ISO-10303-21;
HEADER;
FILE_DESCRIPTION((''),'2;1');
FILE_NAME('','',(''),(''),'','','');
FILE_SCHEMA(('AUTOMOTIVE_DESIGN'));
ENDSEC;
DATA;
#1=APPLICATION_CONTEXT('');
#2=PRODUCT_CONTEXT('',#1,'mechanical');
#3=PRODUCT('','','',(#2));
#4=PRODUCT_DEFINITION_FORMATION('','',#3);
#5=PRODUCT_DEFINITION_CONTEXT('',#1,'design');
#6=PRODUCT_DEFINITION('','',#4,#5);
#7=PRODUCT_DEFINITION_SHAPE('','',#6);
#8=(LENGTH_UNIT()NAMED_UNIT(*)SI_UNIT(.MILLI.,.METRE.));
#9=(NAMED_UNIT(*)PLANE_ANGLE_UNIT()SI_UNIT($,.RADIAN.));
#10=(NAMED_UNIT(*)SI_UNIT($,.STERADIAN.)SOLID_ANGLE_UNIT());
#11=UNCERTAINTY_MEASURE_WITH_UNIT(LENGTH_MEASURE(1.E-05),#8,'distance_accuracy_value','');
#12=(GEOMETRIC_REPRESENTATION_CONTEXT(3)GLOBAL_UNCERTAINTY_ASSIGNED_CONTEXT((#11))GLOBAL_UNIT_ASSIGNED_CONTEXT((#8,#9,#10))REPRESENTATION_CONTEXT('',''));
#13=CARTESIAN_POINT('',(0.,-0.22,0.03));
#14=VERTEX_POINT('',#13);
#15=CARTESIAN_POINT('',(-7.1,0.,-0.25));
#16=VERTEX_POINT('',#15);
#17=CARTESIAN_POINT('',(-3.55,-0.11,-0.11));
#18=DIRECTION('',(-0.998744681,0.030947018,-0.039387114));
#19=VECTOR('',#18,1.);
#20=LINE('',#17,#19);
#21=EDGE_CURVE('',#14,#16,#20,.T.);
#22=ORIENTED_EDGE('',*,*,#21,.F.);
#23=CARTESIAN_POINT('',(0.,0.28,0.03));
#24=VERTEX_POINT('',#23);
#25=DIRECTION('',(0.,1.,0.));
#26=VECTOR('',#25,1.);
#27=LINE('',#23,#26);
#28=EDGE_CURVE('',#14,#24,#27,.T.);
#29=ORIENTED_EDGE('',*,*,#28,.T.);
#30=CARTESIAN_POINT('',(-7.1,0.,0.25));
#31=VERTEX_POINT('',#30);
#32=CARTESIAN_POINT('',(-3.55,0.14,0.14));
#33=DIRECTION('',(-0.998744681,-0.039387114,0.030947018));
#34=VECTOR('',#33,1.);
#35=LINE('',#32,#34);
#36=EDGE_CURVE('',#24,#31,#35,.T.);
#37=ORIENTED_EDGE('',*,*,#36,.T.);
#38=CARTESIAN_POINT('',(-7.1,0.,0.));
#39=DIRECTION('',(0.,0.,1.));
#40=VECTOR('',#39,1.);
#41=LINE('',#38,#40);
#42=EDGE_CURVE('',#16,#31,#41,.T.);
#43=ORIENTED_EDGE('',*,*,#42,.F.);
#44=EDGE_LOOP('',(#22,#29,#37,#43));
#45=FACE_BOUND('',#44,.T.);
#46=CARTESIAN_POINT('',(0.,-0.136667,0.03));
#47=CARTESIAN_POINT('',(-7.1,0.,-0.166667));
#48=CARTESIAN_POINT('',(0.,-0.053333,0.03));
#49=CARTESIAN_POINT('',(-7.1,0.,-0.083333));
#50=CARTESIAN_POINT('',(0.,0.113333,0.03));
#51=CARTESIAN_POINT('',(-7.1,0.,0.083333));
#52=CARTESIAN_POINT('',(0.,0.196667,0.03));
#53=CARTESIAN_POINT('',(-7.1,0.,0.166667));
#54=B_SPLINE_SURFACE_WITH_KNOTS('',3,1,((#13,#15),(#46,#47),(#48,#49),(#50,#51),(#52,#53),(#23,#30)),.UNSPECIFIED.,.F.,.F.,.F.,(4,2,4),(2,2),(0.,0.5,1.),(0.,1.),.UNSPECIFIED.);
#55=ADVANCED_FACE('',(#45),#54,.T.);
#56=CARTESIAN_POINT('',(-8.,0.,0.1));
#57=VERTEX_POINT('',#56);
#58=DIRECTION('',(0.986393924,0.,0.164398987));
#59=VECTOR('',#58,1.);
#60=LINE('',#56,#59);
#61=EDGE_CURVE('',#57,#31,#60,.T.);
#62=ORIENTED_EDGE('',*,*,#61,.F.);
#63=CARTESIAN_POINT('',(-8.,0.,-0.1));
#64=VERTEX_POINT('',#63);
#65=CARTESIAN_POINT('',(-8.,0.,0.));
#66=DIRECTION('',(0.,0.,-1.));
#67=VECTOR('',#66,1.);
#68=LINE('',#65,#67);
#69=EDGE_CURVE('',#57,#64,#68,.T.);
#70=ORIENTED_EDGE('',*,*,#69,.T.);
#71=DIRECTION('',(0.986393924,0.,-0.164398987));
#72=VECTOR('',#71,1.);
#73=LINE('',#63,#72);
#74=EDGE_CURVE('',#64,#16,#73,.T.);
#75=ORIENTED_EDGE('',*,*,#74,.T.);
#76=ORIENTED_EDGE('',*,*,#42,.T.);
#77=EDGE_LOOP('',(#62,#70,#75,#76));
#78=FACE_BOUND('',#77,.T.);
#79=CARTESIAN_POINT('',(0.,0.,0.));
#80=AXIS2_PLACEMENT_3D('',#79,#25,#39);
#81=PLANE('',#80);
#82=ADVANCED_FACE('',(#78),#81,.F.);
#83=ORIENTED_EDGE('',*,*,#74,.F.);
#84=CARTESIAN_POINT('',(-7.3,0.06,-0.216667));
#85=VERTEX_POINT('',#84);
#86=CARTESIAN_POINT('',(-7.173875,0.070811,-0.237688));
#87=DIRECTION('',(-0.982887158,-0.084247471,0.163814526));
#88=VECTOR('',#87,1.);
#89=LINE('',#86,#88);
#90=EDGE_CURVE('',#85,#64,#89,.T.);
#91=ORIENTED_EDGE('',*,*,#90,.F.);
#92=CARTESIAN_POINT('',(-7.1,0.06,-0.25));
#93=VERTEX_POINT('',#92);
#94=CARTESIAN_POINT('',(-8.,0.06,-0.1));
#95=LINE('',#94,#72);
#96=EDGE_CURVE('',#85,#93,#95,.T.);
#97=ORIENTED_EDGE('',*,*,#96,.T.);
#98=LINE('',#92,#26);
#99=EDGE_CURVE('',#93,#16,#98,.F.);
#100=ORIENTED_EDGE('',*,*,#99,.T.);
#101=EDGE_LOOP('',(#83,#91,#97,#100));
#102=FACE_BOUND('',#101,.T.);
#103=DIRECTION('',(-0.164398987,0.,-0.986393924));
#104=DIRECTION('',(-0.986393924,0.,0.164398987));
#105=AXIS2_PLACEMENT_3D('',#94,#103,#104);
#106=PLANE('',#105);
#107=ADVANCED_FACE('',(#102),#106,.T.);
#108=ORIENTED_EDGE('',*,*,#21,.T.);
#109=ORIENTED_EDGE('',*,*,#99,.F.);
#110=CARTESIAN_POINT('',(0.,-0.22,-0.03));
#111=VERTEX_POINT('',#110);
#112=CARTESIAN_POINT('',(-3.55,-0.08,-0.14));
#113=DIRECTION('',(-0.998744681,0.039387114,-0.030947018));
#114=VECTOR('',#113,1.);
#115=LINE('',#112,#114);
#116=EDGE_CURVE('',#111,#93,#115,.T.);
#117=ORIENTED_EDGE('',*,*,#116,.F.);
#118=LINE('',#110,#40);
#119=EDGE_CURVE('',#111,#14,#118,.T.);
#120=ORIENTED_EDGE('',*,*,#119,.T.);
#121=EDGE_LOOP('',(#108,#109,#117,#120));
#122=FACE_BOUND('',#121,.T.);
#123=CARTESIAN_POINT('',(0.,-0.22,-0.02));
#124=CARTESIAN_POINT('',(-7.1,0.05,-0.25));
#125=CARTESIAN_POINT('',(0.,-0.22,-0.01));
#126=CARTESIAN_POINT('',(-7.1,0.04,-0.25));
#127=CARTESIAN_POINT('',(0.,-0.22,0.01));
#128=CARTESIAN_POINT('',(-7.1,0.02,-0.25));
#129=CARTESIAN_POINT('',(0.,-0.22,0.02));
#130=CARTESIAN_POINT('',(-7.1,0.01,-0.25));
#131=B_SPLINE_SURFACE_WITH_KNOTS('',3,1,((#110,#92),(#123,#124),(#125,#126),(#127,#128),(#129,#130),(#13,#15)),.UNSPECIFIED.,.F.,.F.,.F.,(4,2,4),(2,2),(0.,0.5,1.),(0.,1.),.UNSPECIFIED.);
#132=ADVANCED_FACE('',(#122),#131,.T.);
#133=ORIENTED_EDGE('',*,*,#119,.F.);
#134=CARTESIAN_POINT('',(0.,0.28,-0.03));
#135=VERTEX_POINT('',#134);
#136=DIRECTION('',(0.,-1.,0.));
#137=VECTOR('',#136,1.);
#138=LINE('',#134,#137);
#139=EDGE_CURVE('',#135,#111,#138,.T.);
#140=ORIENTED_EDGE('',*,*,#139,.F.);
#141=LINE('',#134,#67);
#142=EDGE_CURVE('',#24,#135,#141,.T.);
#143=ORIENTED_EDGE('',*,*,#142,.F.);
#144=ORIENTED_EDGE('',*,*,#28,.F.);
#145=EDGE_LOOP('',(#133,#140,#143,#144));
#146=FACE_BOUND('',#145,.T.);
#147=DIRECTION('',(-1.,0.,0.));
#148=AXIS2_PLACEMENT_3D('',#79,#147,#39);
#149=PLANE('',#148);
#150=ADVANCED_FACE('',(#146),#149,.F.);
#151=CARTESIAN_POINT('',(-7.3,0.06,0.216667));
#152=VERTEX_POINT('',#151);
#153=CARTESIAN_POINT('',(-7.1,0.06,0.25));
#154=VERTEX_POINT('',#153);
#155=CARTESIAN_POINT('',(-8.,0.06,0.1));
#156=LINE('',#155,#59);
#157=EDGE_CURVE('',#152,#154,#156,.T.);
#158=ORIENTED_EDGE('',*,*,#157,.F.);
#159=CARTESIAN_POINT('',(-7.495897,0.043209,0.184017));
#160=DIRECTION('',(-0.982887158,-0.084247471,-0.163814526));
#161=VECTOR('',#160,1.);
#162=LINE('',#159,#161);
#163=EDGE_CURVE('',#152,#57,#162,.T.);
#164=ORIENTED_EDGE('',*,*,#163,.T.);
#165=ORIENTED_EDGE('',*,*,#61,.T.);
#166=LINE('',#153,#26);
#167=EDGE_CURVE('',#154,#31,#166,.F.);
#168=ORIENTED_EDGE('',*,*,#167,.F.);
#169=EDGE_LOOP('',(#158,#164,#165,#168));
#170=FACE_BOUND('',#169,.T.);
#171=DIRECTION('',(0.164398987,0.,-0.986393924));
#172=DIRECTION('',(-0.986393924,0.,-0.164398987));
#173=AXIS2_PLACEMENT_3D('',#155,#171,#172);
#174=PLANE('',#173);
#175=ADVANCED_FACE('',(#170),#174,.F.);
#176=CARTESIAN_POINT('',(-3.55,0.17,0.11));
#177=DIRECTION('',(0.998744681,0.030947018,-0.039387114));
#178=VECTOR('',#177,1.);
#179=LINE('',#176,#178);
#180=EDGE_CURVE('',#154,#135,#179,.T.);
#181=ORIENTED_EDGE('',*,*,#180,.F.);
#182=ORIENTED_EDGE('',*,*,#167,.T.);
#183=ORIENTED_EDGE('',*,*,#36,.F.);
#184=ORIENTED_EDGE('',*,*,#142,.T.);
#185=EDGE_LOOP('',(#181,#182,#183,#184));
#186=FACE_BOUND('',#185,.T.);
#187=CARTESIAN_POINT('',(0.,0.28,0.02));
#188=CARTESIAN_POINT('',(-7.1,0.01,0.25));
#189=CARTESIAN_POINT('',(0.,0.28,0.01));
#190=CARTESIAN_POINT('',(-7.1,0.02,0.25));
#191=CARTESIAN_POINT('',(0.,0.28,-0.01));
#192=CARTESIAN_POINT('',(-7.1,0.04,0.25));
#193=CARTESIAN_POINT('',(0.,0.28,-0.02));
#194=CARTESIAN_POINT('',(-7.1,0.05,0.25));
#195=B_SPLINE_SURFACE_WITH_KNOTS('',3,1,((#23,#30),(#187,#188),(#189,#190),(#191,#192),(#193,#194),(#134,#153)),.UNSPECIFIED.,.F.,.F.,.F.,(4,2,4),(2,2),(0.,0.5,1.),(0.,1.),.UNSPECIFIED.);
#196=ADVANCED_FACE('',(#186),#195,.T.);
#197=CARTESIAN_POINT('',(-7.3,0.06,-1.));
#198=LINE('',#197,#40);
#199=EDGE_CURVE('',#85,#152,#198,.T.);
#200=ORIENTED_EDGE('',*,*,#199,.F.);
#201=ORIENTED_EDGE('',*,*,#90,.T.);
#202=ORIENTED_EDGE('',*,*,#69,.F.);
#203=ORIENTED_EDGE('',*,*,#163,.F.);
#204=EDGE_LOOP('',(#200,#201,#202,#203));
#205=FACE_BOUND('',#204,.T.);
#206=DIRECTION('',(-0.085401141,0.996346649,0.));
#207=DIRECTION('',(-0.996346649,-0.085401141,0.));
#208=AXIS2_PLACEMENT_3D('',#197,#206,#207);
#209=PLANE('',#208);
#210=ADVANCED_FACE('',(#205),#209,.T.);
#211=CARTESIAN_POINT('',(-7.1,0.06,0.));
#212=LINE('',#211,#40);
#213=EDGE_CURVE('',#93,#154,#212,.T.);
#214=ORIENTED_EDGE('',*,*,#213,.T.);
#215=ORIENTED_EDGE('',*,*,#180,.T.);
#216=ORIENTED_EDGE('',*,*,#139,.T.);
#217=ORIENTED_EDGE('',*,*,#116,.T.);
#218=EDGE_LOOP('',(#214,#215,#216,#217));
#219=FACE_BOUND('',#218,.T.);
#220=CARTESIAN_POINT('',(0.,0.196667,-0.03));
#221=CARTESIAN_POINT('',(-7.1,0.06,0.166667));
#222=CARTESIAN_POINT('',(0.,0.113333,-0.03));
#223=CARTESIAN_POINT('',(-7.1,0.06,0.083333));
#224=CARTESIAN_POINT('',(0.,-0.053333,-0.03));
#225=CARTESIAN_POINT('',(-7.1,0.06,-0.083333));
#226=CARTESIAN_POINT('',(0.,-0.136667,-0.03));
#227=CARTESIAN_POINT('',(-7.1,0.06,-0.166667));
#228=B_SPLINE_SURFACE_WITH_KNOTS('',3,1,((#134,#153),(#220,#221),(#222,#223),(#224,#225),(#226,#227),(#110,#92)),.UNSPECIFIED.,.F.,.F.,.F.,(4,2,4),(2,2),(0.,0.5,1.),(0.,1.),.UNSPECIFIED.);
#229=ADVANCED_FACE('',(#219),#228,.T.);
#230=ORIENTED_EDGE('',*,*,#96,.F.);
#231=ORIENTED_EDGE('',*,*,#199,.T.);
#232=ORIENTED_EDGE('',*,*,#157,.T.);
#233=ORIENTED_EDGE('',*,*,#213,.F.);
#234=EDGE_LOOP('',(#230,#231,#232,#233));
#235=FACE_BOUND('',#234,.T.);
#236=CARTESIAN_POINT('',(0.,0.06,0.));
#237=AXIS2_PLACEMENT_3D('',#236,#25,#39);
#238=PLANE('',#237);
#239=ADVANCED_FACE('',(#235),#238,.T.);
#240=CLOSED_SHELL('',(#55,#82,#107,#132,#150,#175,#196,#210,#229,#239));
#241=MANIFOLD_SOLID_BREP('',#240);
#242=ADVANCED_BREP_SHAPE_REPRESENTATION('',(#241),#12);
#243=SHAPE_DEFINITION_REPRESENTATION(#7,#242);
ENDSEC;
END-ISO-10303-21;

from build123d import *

# Parameters (mm, degrees)
BOSS_EXTRUDE1_DEPTH = 0.06
CUT_EXTRUDE3_DEPTH  = 9.09728967
CUT_EXTRUDE4_DEPTH  = 9.09728967
CUT_EXTRUDE5_DEPTH  = 2.5
SKETCH7_W           = 7.1
SKETCH7_H           = 0.5
CUT_EXTRUDE6_DEPTH  = 2.5


with BuildPart() as part:
    # Sketch1 → Boss-Extrude1 (new body)
    with BuildSketch(Plane(origin=(0, 0, 0), x_dir=(1, 0, 0), z_dir=(0, 1, 0))):
        with BuildLine():
            ThreePointArc((-0.362264151, -0.932075472), (-0.747576714, -0.664175471), (-0.968245837, -0.25))
            Line((-0.968245837, -0.25), (-4, -0.25))
            Line((-4, -0.25), (-0.362264151, -0.932075472))
        make_face()
        with BuildLine():
            ThreePointArc((-0.968245837, 0.25), (-0.747576714, 0.664175471), (-0.362264151, 0.932075472))
            Line((-0.362264151, 0.932075472), (-4, 0.25))
            Line((-4, 0.25), (-0.968245837, 0.25))
        make_face()
        with BuildLine():
            ThreePointArc((-0.968245837, -0.25), (-1, 0), (-0.968245837, 0.25))
            Line((-0.968245837, 0.25), (-4, 0.25))
            Line((-4, 0.25), (-8, 0.25))
            Line((-8, 0.25), (-8, -0.25))
            Line((-8, -0.25), (-4, -0.25))
            Line((-4, -0.25), (-0.968245837, -0.25))
        make_face()
        with BuildLine():
            Line((0, -1), (0, -0.25))
            Line((0, -0.25), (-0.968245837, -0.25))
            ThreePointArc((-0.968245837, -0.25), (-0.747576714, -0.664175471), (-0.362264151, -0.932075472))
            Line((-0.362264151, -0.932075472), (0, -1))
        make_face()
        with BuildLine():
            Line((0, 0.25), (0, 1))
            Line((0, 1), (-0.362264151, 0.932075472))
            ThreePointArc((-0.362264151, 0.932075472), (-0.747576714, 0.664175471), (-0.968245837, 0.25))
            Line((-0.968245837, 0.25), (0, 0.25))
        make_face()
        with BuildLine():
            Line((0, -0.25), (0, 0.25))
            Line((0, 0.25), (-0.968245837, 0.25))
            ThreePointArc((-0.968245837, 0.25), (-1, 0), (-0.968245837, -0.25))
            Line((-0.968245837, -0.25), (0, -0.25))
        make_face()
    extrude(amount=BOSS_EXTRUDE1_DEPTH)

    # Sketch5 → Cut-Extrude3 (cut, through all)
    with BuildSketch(Plane.XY.offset(0.25)):
        Polygon((-8, 0), (-8, 0.06), (-7.3, 0.06), align=None)
    extrude(amount=-CUT_EXTRUDE3_DEPTH, mode=Mode.SUBTRACT)

    # 3DSketch1 → Cut-Extrude4 (cut, through all)
    with BuildSketch(Plane(origin=(-8, 0.06, 0.25), x_dir=(0.8741572761215382, 0, -0.48564293117863155), z_dir=(0, 1, 0))):
        Polygon((0, 0), (0.07284644, 0.131123591), (0.786741549, -0.437078638), align=None)
        Polygon((1.029563014, 0), (0.242821466, 0.437078638), (0.169975026, 0.305955047), align=None)
    extrude(amount=-CUT_EXTRUDE4_DEPTH, mode=Mode.SUBTRACT)

    # Sketch6 → Cut-Extrude5 (cut)
    with BuildSketch(Plane(origin=(0, 0.06, 0), x_dir=(1, 0, 0), z_dir=(0, 1, 0))):
        Polygon((0, 1), (-4, 0.25), (0, 0.25), align=None)
        Polygon((0, -0.25), (-4, -0.25), (0, -1), align=None)
    extrude(amount=-CUT_EXTRUDE5_DEPTH, mode=Mode.SUBTRACT)

    # Sketch7 → Cut-Extrude6 (cut)
    with BuildSketch(Plane(origin=(0, 0.06, 0), x_dir=(1, 0, 0), z_dir=(0, 1, 0))):
        with Locations((-3.55, 0)):
            Rectangle(SKETCH7_W, SKETCH7_H)
    extrude(amount=-CUT_EXTRUDE6_DEPTH, mode=Mode.SUBTRACT)

    # Loft3: read off the stored shape, not the designer's step
    # Loft3: loft between two sections, ruled curve by curve
    loft3_from = [
        Edge.make_bspline([(0, 0.28, -0.03), (0, 0.196666667, -0.03), (0, 0.113333333, -0.03), (0, -0.053333333, -0.03), (0, -0.136666667, -0.03), (0, -0.22, -0.03)], [0, 0, 0, 0, 0.5, 0.5, 1, 1, 1, 1], 3),
        Edge.make_bspline([(0, -0.22, -0.03), (0, -0.22, -0.02), (0, -0.22, -0.01), (0, -0.22, 0.01), (0, -0.22, 0.02), (0, -0.22, 0.03)], [0, 0, 0, 0, 0.5, 0.5, 1, 1, 1, 1], 3),
        Edge.make_bspline([(0, 0.28, 0.03), (0, 0.28, 0.02), (0, 0.28, 0.01), (0, 0.28, -0.01), (0, 0.28, -0.02), (0, 0.28, -0.03)], [0, 0, 0, 0, 0.5, 0.5, 1, 1, 1, 1], 3),
        Edge.make_bspline([(0, -0.22, 0.03), (0, -0.136666667, 0.03), (0, -0.053333333, 0.03), (0, 0.113333333, 0.03), (0, 0.196666667, 0.03), (0, 0.28, 0.03)], [0, 0, 0, 0, 0.5, 0.5, 1, 1, 1, 1], 3),
    ]
    loft3_to = [
        Edge.make_bspline([(-7.1, 0.06, 0.25), (-7.1, 0.06, 0.166666667), (-7.1, 0.06, 0.083333333), (-7.1, 0.06, -0.083333333), (-7.1, 0.06, -0.166666667), (-7.1, 0.06, -0.25)], [0, 0, 0, 0, 0.5, 0.5, 1, 1, 1, 1], 3),
        Edge.make_bspline([(-7.1, 0.06, -0.25), (-7.1, 0.05, -0.25), (-7.1, 0.04, -0.25), (-7.1, 0.02, -0.25), (-7.1, 0.01, -0.25), (-7.1, 0, -0.25)], [0, 0, 0, 0, 0.5, 0.5, 1, 1, 1, 1], 3),
        Edge.make_bspline([(-7.1, 0, 0.25), (-7.1, 0.01, 0.25), (-7.1, 0.02, 0.25), (-7.1, 0.04, 0.25), (-7.1, 0.05, 0.25), (-7.1, 0.06, 0.25)], [0, 0, 0, 0, 0.5, 0.5, 1, 1, 1, 1], 3),
        Edge.make_bspline([(-7.1, 0, -0.25), (-7.1, 0, -0.166666667), (-7.1, 0, -0.083333333), (-7.1, 0, 0.083333333), (-7.1, 0, 0.166666667), (-7.1, 0, 0.25)], [0, 0, 0, 0, 0.5, 0.5, 1, 1, 1, 1], 3),
    ]
    loft3 = Solid(Shell([*[Face.make_surface_from_curves(loft3_from[k], loft3_to[k]) for k in range(4)], Face(Wire(loft3_from)), Face(Wire(loft3_to))]))
    add(loft3)


solid = part.part
